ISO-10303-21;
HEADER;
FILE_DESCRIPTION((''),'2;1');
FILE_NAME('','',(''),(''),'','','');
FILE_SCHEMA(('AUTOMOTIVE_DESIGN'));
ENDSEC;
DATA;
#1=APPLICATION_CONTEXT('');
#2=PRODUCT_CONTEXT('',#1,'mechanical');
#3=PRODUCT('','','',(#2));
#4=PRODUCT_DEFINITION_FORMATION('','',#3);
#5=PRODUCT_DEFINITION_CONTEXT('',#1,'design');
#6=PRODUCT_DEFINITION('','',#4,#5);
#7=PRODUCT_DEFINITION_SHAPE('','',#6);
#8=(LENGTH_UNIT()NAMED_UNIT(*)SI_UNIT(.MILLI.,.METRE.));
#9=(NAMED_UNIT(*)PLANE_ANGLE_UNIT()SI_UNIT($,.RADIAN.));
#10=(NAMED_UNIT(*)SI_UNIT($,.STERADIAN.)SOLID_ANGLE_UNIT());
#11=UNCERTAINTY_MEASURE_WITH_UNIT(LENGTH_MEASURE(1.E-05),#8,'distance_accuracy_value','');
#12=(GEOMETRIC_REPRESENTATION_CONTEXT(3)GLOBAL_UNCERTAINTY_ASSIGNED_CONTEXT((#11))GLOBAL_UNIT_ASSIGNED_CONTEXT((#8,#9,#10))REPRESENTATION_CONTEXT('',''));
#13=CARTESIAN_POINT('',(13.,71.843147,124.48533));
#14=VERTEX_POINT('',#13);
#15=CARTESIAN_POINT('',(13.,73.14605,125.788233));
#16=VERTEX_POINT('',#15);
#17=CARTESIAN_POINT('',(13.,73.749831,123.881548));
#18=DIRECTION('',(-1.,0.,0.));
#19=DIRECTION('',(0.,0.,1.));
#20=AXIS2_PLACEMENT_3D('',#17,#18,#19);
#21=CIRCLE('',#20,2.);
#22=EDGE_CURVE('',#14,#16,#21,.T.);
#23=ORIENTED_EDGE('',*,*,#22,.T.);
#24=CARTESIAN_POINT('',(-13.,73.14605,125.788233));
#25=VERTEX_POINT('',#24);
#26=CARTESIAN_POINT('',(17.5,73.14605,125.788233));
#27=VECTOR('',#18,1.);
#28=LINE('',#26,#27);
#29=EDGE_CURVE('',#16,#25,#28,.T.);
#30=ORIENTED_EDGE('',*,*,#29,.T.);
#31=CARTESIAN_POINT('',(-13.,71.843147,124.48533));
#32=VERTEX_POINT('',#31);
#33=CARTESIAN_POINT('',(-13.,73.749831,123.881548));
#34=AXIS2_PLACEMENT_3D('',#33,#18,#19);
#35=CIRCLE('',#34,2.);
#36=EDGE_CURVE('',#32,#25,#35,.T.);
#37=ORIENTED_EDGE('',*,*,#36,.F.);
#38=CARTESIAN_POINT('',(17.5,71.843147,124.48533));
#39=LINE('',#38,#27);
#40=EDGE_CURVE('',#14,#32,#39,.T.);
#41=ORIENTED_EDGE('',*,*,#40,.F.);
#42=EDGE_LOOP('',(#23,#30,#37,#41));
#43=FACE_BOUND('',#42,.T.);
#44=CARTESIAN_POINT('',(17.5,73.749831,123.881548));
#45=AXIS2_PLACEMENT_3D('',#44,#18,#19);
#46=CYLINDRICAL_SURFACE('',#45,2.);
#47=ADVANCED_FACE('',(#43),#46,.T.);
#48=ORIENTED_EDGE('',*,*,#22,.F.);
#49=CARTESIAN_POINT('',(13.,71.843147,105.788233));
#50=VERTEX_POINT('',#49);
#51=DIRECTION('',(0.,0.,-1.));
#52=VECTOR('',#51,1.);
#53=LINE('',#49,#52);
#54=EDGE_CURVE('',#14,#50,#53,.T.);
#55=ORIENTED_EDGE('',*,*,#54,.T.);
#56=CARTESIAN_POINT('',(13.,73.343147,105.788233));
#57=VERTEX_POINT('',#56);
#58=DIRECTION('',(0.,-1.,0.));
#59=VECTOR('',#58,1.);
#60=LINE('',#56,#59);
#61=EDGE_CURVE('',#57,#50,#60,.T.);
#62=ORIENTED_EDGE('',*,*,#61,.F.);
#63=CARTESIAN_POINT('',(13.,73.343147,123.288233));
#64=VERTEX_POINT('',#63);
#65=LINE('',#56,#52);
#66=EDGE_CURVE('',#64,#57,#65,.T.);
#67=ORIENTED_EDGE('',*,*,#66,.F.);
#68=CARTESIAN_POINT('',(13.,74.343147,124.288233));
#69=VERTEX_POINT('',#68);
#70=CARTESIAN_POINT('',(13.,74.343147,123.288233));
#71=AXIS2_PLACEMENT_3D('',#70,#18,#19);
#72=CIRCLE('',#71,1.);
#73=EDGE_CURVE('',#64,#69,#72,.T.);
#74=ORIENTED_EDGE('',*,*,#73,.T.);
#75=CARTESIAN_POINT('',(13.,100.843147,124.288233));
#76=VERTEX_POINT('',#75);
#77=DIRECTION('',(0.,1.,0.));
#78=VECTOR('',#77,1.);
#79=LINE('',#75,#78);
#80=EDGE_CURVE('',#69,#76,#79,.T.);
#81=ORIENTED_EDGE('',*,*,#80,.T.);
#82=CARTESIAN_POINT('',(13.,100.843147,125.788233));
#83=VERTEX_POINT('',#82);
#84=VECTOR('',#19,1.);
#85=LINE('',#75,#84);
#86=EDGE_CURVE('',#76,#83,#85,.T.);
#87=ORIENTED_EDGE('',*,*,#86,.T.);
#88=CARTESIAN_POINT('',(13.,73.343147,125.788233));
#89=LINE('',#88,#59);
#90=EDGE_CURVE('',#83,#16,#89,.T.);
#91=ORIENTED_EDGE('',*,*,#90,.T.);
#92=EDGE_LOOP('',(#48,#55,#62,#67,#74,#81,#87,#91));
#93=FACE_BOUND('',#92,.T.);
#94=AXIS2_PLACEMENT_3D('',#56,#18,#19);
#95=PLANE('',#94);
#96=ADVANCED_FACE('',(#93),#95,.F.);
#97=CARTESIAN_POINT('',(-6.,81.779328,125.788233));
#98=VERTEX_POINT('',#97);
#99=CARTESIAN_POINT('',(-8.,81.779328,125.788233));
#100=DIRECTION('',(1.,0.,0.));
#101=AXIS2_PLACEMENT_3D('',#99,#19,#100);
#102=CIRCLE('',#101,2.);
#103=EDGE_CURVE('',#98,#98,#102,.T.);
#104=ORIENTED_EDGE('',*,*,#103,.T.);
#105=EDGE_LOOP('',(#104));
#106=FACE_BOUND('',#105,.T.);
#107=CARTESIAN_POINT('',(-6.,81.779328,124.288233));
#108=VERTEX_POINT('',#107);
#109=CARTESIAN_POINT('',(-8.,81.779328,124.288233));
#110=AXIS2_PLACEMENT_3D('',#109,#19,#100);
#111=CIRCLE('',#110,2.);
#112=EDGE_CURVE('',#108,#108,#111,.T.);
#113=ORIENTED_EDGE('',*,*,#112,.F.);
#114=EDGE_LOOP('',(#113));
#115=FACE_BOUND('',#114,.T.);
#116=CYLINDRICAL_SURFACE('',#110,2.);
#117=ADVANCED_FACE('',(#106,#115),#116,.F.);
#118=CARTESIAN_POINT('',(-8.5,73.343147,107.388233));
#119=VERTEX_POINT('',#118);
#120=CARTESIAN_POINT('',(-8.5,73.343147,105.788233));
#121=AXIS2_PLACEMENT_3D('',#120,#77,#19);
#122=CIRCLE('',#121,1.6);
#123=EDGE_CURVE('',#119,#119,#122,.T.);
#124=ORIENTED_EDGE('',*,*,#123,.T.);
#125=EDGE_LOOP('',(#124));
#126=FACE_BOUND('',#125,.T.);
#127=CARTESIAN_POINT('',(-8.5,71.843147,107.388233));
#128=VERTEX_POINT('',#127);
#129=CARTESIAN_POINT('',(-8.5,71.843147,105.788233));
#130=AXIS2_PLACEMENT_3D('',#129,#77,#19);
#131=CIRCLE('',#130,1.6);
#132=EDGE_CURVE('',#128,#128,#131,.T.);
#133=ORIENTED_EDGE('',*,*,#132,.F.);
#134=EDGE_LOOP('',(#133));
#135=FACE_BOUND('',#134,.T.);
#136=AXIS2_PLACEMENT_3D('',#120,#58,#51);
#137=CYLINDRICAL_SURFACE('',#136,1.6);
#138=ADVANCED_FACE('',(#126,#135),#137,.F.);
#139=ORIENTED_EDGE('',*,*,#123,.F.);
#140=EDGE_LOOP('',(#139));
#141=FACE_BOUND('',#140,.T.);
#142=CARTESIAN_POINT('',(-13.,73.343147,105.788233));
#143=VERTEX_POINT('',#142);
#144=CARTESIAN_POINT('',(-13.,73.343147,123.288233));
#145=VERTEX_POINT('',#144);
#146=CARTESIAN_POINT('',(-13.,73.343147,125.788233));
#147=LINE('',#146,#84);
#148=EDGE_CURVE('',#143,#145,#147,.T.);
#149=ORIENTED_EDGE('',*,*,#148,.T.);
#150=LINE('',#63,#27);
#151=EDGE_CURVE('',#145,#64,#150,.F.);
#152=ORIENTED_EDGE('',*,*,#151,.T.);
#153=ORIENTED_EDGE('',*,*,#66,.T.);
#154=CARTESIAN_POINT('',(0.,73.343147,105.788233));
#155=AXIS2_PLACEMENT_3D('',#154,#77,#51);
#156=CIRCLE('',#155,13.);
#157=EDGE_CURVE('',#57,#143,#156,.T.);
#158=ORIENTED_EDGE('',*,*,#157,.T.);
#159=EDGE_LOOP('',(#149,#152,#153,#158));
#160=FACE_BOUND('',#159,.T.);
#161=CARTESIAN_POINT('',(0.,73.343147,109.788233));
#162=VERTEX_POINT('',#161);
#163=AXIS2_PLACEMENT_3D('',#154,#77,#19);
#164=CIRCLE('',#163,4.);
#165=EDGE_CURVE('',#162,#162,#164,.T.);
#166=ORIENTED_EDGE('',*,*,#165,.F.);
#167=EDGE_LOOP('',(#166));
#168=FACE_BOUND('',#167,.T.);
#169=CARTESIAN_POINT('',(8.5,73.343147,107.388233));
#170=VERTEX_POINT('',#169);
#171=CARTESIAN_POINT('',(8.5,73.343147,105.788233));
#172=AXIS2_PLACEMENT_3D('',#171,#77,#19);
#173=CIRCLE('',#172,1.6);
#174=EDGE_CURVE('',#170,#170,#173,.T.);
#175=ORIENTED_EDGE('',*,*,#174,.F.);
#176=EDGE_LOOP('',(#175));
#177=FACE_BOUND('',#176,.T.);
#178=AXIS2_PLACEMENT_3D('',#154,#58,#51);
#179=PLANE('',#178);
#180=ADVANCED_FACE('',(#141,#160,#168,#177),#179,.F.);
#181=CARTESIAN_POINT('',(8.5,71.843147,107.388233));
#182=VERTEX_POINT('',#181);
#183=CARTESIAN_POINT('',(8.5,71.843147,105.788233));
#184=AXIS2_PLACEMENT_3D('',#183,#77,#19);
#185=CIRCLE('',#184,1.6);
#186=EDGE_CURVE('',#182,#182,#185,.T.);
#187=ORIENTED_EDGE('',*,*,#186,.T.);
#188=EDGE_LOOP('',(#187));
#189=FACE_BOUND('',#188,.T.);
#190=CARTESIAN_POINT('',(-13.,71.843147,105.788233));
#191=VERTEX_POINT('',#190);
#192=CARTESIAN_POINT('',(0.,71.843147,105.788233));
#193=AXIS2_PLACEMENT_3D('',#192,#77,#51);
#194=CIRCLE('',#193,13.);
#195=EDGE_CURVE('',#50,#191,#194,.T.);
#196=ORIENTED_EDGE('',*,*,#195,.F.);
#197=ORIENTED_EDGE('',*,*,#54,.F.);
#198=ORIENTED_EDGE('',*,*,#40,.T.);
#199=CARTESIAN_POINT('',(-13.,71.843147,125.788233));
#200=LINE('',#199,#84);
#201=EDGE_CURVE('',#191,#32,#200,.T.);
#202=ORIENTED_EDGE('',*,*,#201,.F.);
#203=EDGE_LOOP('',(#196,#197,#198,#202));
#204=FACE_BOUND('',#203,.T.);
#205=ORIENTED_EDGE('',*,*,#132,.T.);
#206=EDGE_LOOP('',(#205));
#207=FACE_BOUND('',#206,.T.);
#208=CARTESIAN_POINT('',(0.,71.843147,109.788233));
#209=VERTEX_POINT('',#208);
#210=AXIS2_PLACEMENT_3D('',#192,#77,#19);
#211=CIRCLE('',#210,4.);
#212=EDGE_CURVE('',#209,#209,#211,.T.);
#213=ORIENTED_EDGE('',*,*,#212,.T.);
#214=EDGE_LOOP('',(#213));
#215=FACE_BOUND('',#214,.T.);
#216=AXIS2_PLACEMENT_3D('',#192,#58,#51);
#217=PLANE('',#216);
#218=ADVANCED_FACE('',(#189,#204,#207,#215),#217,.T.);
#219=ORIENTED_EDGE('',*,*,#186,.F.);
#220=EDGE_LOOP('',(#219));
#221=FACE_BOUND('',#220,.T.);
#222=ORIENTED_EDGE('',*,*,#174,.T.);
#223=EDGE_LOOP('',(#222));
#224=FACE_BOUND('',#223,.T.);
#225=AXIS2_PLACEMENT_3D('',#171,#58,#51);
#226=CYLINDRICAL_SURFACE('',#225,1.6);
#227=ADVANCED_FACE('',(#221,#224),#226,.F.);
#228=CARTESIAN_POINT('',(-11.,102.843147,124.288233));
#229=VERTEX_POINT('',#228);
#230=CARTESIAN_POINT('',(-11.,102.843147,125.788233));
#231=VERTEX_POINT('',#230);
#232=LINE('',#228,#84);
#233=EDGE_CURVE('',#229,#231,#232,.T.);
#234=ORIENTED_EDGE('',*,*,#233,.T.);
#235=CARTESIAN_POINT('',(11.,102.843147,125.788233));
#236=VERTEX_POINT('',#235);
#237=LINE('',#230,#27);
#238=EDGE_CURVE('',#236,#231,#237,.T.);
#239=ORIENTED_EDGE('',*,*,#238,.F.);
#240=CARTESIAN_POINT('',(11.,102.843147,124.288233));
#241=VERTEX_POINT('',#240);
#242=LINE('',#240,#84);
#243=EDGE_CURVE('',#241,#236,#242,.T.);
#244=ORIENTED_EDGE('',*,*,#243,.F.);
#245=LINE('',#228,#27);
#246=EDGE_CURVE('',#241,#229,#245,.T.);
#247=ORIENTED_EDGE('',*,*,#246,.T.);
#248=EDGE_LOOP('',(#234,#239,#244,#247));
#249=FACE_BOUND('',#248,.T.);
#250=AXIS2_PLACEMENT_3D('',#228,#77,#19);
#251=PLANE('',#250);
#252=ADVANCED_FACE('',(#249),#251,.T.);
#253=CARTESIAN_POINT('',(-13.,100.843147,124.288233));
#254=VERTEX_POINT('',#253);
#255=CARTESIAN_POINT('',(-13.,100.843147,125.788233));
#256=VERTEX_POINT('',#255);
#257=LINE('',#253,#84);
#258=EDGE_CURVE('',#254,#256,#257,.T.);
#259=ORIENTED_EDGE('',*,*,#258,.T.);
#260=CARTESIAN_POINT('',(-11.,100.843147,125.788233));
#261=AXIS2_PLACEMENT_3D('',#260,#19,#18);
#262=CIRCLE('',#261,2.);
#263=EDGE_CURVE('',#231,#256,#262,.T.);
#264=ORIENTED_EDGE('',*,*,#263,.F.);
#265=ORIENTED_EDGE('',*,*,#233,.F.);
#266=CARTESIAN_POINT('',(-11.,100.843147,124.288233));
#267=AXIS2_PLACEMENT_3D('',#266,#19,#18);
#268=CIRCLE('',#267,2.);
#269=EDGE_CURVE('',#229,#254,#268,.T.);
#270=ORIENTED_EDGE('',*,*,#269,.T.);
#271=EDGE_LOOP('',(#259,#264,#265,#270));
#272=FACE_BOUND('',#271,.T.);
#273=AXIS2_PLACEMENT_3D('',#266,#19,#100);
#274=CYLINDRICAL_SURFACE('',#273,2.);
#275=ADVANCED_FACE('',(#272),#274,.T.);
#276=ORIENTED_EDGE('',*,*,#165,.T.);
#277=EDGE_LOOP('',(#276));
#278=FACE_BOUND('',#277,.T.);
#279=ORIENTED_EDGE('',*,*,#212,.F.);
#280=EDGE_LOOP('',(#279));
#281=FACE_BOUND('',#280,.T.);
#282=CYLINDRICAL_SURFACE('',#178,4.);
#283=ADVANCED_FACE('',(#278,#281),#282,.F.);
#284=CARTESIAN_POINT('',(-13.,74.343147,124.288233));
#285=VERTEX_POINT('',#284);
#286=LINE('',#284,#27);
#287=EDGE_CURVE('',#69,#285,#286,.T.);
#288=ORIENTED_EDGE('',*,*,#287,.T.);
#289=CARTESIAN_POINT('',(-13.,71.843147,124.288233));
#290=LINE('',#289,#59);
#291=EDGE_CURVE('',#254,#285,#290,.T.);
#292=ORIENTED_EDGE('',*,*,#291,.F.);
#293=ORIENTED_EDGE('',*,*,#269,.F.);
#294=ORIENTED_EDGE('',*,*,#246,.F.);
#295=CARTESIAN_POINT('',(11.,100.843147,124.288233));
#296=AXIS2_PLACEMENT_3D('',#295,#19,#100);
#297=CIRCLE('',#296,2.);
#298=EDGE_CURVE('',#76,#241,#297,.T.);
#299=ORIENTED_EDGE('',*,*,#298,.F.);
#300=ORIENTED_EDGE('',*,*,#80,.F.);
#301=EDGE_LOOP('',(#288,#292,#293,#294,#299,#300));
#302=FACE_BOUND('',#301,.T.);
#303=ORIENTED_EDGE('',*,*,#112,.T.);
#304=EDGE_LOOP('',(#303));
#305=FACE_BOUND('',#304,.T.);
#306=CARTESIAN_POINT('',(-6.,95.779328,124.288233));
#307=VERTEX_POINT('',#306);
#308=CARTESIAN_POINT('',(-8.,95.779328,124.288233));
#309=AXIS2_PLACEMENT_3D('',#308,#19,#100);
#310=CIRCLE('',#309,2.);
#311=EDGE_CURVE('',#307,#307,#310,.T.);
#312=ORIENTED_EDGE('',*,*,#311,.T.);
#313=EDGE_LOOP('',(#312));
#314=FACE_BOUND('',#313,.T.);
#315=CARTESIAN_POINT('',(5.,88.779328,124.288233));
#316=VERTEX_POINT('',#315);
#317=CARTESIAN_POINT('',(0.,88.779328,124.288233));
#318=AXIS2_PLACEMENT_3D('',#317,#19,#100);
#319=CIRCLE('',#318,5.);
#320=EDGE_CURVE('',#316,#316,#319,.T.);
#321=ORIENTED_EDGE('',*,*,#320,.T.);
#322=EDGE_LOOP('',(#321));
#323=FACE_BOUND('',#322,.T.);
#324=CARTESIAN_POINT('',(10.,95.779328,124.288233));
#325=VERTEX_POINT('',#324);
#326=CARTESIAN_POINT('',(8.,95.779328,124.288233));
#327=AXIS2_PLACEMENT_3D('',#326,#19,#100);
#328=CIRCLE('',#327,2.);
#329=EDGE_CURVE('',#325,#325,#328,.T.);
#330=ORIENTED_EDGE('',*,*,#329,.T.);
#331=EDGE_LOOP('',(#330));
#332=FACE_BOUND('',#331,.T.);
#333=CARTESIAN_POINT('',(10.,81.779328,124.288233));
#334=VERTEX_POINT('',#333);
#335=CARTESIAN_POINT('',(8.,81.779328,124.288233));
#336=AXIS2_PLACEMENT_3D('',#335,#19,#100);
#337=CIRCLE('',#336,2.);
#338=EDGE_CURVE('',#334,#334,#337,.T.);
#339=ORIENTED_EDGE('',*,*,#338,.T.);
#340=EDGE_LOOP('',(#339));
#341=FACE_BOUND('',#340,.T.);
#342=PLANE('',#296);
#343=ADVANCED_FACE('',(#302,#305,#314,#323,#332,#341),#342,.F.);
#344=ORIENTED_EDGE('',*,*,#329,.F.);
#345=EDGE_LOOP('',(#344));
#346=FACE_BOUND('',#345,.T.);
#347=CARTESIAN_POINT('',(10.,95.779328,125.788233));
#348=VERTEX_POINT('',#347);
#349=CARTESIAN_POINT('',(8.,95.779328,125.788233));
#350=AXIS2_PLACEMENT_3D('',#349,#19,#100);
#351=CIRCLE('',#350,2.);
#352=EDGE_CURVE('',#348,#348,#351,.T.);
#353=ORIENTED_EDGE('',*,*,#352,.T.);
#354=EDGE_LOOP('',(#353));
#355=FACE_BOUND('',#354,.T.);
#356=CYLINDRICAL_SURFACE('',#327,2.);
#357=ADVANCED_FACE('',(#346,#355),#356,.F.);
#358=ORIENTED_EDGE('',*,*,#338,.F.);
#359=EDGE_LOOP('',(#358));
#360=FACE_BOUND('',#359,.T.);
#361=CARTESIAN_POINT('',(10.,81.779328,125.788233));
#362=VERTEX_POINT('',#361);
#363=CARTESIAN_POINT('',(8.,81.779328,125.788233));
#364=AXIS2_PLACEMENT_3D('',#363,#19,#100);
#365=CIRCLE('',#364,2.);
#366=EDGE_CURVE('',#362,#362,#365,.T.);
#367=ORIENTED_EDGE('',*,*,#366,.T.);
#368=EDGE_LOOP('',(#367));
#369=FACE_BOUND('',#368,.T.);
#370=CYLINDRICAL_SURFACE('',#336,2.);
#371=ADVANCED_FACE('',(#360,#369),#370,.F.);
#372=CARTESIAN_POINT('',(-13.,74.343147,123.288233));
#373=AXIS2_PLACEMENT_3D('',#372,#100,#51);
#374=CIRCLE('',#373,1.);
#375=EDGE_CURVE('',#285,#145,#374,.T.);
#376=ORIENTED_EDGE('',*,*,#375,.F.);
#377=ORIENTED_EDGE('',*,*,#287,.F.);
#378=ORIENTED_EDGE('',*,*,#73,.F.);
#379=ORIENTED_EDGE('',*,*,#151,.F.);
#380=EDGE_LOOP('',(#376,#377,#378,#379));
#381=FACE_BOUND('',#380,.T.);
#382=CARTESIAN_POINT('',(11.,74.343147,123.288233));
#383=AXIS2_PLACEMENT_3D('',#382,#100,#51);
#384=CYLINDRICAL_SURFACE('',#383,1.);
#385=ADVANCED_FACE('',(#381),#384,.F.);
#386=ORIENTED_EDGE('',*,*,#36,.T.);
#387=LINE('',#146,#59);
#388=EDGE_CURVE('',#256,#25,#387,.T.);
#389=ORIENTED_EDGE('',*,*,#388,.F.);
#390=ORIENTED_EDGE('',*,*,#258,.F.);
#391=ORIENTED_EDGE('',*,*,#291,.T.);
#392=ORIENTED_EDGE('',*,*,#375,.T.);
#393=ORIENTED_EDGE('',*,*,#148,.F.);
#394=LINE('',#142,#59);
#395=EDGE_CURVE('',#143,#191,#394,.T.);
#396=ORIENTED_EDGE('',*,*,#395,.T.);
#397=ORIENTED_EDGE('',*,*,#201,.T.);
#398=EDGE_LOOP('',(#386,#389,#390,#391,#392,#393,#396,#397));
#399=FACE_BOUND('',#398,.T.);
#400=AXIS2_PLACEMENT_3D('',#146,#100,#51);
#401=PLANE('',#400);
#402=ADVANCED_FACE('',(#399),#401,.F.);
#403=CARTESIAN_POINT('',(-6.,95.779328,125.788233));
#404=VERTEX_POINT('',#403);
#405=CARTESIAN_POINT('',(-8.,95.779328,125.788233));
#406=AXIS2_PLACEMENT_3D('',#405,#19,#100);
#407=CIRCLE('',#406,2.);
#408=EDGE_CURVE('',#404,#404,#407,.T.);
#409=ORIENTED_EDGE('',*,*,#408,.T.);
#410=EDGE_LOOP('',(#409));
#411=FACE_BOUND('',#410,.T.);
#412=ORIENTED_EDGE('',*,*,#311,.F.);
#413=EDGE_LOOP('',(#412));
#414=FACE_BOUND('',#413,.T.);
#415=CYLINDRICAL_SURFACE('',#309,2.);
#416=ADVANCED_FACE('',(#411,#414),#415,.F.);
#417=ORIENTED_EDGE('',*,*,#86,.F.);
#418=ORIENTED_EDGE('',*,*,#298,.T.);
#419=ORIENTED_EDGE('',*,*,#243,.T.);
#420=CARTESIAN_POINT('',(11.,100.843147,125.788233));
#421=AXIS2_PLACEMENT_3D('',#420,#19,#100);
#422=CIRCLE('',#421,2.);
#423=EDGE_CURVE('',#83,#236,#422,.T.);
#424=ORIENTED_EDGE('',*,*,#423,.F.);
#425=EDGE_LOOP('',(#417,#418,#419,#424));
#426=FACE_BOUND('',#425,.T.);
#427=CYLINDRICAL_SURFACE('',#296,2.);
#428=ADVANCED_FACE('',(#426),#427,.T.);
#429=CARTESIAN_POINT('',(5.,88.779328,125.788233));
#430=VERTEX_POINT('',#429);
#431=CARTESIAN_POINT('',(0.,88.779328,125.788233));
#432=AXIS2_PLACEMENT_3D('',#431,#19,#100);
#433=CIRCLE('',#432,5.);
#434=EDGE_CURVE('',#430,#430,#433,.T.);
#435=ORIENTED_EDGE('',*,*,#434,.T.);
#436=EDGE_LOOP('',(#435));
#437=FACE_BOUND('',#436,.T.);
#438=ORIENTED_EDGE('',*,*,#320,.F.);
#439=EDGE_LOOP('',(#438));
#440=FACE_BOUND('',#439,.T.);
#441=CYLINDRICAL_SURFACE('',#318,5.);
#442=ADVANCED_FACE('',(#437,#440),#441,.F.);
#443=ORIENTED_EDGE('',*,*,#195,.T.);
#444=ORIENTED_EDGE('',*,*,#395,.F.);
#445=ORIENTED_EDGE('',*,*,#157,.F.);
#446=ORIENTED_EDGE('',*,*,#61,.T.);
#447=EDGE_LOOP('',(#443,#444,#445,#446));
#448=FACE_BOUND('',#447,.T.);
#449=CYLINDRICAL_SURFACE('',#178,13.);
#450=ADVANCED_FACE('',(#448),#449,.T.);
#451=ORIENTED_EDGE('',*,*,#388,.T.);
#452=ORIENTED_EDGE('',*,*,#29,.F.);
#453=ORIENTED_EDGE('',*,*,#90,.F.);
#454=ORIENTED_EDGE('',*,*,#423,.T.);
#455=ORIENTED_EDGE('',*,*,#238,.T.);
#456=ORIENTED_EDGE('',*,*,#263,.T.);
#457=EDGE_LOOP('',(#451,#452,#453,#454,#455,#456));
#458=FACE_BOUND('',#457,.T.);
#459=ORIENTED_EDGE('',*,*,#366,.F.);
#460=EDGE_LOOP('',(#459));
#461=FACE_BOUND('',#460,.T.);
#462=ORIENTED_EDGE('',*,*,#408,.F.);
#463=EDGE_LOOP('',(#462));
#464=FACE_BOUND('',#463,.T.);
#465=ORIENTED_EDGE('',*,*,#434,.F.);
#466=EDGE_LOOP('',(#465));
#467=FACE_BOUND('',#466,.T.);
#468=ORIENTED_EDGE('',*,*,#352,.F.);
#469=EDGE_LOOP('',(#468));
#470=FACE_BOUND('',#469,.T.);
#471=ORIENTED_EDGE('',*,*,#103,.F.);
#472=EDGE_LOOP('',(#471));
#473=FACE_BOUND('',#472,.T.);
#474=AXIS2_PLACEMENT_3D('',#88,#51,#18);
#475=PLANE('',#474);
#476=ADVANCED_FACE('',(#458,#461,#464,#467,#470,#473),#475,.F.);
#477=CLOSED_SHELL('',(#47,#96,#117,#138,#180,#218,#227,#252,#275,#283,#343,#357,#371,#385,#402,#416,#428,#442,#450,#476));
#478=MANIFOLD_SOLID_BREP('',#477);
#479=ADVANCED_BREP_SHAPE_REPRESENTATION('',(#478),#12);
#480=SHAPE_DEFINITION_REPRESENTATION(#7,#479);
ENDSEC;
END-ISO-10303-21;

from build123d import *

# Parameters (mm, degrees)
SKETCH1_R           = 40
SKETCH1_R_2         = 16
BOSS_EXTRUDE1_DEPTH = 15
SKETCH2_R           = 50
SKETCH2_R_2         = 20
BOSS_EXTRUDE2_DEPTH = 15
CUT_EXTRUDE2_START  = -260
CUT_EXTRUDE2_DEPTH  = 260
FILLET1_R           = 10
SCALE2_SCALE        = 0.1


# Read off the part's stored shape, not the designer's step: Cut-Extrude2
with BuildPart() as part:
    # Sketch1 → Boss-Extrude1 (new body)
    with BuildSketch(Plane(origin=(0, 0, 0), x_dir=(1, 0, 0), z_dir=(0, 1, 0))):
        with BuildLine():
            Line((-130, -200), (-130, 0))
            ThreePointArc((-130, 0), (0, 130), (130, 0))
            Line((130, 0), (130, -200))
            Line((130, -200), (-130, -200))
        make_face()
        with Locations(Location((0, 0, 0), (0, 0, 270))):
            Circle(SKETCH1_R, mode=Mode.SUBTRACT)
        with Locations(Location((-85, 0, 0), (0, 0, 270))):
            Circle(SKETCH1_R_2, mode=Mode.SUBTRACT)
        with Locations(Location((85, 0, 0), (0, 0, 270))):
            Circle(SKETCH1_R_2, mode=Mode.SUBTRACT)
    extrude(amount=BOSS_EXTRUDE1_DEPTH)

    # Sketch2 → Boss-Extrude2 (add)
    with BuildSketch(Plane.XY.offset(200)):
        with BuildLine():
            Line((-130, 0), (-130, 290))
            ThreePointArc((-130, 290), (-124.142135624, 304.142135624), (-110, 310))
            Line((-110, 310), (110, 310))
            ThreePointArc((110, 310), (124.142135624, 304.142135624), (130, 290))
            Line((130, 290), (130, 0))
            Line((130, 0), (-130, 0))
        make_face()
        with Locations((0, 169.361818375)):
            Circle(SKETCH2_R, mode=Mode.SUBTRACT)
        with Locations((80, 239.361818375)):
            Circle(SKETCH2_R_2, mode=Mode.SUBTRACT)
        with Locations((-80, 239.361818375)):
            Circle(SKETCH2_R_2, mode=Mode.SUBTRACT)
        with Locations((-80, 99.361818375)):
            Circle(SKETCH2_R_2, mode=Mode.SUBTRACT)
        with Locations((80, 99.361818375)):
            Circle(SKETCH2_R_2, mode=Mode.SUBTRACT)
    extrude(amount=-BOSS_EXTRUDE2_DEPTH)

    # Cut-Extrude2 outline → Cut-Extrude2 (cut)
    with BuildSketch(Plane.ZY.offset(130).offset(CUT_EXTRUDE2_START)):
        with BuildLine():
            ThreePointArc((200, 13.029030935), (195.075286181, 4.924713819), (186.970969065, 0))
            Line((186.970969065, 0), (200, 0))
            Line((200, 0), (200, 13.029030935))
        make_face()
    extrude(amount=CUT_EXTRUDE2_DEPTH, mode=Mode.SUBTRACT)

    # Fillet1
    fillet1_edges = [part.edges().sort_by_distance(p)[0] for p in [
        (0, 15, 185),
    ]]
    fillet(fillet1_edges, radius=FILLET1_R)


with BuildPart() as part_1:
    # Scale2: scaled about (0, 79.825718393, 117.542480981)
    add(part.part.scale(SCALE2_SCALE).moved(Location((0, 71.843146554, 105.788232883))))


solid = part_1.part
